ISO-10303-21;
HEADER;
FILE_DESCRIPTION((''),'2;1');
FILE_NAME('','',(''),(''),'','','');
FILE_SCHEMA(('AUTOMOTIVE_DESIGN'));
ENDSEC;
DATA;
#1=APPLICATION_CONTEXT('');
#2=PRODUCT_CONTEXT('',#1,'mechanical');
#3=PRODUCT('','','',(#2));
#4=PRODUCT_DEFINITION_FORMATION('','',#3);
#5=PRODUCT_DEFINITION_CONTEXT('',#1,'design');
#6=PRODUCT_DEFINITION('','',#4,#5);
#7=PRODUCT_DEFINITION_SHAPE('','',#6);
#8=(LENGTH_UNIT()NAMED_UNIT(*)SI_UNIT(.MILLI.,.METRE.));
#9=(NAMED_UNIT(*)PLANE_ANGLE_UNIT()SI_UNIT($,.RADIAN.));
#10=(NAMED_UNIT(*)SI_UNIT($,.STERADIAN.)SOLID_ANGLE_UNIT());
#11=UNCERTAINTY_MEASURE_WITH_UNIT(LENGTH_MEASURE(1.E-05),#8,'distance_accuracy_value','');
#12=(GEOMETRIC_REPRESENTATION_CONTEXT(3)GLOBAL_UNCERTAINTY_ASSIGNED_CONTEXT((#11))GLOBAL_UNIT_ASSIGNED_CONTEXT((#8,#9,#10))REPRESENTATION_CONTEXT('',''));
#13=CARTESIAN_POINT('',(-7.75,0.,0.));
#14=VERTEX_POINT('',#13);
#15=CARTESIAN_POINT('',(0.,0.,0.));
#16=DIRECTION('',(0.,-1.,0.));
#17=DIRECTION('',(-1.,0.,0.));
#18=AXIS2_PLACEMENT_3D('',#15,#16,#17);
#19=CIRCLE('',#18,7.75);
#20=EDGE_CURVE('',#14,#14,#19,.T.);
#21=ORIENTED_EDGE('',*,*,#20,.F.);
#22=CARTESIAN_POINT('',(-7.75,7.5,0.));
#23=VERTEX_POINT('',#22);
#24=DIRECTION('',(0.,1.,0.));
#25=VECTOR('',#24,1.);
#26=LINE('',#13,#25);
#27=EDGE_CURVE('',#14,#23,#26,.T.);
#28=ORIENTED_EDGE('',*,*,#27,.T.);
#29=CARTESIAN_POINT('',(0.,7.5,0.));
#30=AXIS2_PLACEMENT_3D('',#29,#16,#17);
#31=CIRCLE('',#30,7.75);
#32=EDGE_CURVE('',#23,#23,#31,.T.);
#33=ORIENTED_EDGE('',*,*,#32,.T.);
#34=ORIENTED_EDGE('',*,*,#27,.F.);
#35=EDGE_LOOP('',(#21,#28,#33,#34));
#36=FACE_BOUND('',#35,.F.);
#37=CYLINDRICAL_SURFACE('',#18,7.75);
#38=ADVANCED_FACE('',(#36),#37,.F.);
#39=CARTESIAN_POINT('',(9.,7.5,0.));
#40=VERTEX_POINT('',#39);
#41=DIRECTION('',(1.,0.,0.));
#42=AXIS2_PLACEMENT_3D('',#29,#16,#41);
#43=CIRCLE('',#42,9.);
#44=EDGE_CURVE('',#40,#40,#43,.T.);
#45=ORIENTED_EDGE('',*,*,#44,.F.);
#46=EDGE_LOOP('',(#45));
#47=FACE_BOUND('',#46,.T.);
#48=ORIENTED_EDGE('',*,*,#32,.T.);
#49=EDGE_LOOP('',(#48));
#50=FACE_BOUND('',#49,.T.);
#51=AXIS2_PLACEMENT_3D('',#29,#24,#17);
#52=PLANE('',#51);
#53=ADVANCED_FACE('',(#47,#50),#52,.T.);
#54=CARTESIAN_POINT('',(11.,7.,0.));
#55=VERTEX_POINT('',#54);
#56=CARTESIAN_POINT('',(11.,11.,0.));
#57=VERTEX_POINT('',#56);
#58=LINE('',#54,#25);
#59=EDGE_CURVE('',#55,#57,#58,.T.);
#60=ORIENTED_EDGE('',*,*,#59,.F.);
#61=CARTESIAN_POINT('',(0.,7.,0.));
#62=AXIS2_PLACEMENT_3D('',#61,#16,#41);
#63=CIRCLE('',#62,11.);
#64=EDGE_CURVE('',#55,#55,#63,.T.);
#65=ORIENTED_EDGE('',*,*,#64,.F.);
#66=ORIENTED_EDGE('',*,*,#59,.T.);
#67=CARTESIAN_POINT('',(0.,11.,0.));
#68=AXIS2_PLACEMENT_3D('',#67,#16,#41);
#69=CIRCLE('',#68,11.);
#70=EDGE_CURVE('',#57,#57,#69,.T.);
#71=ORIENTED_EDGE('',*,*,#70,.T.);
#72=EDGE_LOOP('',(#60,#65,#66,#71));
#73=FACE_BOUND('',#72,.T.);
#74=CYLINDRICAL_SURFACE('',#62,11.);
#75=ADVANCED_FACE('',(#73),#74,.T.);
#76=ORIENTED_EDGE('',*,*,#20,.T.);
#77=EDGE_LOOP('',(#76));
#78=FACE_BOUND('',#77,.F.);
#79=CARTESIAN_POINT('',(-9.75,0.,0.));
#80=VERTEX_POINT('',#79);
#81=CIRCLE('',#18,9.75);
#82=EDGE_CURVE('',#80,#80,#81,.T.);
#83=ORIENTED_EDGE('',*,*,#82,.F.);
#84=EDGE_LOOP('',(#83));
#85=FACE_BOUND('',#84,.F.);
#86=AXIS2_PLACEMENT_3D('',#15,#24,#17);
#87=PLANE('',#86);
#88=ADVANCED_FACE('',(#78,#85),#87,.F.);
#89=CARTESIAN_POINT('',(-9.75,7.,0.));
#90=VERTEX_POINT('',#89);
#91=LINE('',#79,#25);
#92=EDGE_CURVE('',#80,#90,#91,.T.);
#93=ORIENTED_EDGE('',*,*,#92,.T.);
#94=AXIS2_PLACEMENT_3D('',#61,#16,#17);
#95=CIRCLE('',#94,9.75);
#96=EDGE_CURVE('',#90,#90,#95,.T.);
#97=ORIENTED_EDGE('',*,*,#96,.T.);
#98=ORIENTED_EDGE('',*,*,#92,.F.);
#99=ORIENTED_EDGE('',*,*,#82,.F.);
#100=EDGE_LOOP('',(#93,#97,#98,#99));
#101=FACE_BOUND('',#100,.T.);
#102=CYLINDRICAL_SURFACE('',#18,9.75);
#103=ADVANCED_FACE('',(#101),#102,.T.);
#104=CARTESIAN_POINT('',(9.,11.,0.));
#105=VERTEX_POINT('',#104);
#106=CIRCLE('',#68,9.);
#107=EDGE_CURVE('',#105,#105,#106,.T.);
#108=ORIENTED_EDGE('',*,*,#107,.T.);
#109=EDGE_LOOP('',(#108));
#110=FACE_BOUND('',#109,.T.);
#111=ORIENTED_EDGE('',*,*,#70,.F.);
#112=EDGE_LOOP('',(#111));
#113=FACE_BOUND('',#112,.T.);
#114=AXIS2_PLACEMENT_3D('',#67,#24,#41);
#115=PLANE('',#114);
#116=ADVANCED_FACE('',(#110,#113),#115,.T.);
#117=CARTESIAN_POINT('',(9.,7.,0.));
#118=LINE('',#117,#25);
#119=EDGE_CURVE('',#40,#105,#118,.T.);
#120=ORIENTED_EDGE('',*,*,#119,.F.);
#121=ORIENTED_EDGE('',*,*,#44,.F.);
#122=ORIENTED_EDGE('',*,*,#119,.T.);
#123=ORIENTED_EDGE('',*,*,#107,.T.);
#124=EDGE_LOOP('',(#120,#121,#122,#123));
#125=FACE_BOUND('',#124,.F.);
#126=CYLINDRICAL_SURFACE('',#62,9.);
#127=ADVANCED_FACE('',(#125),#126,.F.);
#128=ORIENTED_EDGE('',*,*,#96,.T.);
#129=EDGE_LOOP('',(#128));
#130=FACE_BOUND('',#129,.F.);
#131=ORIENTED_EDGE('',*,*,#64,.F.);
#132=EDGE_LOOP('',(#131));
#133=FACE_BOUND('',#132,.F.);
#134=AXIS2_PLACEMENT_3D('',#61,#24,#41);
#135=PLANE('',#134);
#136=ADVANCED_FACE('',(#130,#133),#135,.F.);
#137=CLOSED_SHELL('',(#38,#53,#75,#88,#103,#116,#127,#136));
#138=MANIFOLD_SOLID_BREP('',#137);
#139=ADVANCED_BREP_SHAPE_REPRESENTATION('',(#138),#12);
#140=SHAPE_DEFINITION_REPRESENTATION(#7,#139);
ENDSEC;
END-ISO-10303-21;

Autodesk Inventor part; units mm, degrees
ref_plane "YZ Plane" through (0, 0, 0) normal (1, 0, 0) x (0, 1, 0)
ref_plane "XZ Plane" through (0, 0, 0) normal (0, 1, 0) x (-1, 0, 0)
ref_plane "XY Plane" through (0, 0, 0) normal (0, 0, 1) x (1, 0, 0)
sketch "Sketch1" plane through (0, 0, 0) normal (0, 1, 0) x (-1, 0, 0)
  circle A0 centre (0, 0) radius 7.75
  circle A1 centre (0, 0) radius 9.75
  dimension "d0" = 15.5
  dimension "d1" = 19.5
extrude "Extrusion1" add sketch "Sketch1" along normal blind 7
sketch "Sketch5" plane through (0, 7, 0) normal (0, 1, 0) x (1, 0, 0)
  circle A0 centre (0, 0) radius 11
  circle A1 centre (0, 0) radius 9
  dimension "d13" = 22
  dimension "d14" = 18
extrude "Extrusion5" add sketch "Sketch5" along normal blind 4
move faces "Move1" translate (0, 0.5, 0) faces at (8.4211, 7, 1.3362)
properties part number "685ZZFlanged_Adapter"
